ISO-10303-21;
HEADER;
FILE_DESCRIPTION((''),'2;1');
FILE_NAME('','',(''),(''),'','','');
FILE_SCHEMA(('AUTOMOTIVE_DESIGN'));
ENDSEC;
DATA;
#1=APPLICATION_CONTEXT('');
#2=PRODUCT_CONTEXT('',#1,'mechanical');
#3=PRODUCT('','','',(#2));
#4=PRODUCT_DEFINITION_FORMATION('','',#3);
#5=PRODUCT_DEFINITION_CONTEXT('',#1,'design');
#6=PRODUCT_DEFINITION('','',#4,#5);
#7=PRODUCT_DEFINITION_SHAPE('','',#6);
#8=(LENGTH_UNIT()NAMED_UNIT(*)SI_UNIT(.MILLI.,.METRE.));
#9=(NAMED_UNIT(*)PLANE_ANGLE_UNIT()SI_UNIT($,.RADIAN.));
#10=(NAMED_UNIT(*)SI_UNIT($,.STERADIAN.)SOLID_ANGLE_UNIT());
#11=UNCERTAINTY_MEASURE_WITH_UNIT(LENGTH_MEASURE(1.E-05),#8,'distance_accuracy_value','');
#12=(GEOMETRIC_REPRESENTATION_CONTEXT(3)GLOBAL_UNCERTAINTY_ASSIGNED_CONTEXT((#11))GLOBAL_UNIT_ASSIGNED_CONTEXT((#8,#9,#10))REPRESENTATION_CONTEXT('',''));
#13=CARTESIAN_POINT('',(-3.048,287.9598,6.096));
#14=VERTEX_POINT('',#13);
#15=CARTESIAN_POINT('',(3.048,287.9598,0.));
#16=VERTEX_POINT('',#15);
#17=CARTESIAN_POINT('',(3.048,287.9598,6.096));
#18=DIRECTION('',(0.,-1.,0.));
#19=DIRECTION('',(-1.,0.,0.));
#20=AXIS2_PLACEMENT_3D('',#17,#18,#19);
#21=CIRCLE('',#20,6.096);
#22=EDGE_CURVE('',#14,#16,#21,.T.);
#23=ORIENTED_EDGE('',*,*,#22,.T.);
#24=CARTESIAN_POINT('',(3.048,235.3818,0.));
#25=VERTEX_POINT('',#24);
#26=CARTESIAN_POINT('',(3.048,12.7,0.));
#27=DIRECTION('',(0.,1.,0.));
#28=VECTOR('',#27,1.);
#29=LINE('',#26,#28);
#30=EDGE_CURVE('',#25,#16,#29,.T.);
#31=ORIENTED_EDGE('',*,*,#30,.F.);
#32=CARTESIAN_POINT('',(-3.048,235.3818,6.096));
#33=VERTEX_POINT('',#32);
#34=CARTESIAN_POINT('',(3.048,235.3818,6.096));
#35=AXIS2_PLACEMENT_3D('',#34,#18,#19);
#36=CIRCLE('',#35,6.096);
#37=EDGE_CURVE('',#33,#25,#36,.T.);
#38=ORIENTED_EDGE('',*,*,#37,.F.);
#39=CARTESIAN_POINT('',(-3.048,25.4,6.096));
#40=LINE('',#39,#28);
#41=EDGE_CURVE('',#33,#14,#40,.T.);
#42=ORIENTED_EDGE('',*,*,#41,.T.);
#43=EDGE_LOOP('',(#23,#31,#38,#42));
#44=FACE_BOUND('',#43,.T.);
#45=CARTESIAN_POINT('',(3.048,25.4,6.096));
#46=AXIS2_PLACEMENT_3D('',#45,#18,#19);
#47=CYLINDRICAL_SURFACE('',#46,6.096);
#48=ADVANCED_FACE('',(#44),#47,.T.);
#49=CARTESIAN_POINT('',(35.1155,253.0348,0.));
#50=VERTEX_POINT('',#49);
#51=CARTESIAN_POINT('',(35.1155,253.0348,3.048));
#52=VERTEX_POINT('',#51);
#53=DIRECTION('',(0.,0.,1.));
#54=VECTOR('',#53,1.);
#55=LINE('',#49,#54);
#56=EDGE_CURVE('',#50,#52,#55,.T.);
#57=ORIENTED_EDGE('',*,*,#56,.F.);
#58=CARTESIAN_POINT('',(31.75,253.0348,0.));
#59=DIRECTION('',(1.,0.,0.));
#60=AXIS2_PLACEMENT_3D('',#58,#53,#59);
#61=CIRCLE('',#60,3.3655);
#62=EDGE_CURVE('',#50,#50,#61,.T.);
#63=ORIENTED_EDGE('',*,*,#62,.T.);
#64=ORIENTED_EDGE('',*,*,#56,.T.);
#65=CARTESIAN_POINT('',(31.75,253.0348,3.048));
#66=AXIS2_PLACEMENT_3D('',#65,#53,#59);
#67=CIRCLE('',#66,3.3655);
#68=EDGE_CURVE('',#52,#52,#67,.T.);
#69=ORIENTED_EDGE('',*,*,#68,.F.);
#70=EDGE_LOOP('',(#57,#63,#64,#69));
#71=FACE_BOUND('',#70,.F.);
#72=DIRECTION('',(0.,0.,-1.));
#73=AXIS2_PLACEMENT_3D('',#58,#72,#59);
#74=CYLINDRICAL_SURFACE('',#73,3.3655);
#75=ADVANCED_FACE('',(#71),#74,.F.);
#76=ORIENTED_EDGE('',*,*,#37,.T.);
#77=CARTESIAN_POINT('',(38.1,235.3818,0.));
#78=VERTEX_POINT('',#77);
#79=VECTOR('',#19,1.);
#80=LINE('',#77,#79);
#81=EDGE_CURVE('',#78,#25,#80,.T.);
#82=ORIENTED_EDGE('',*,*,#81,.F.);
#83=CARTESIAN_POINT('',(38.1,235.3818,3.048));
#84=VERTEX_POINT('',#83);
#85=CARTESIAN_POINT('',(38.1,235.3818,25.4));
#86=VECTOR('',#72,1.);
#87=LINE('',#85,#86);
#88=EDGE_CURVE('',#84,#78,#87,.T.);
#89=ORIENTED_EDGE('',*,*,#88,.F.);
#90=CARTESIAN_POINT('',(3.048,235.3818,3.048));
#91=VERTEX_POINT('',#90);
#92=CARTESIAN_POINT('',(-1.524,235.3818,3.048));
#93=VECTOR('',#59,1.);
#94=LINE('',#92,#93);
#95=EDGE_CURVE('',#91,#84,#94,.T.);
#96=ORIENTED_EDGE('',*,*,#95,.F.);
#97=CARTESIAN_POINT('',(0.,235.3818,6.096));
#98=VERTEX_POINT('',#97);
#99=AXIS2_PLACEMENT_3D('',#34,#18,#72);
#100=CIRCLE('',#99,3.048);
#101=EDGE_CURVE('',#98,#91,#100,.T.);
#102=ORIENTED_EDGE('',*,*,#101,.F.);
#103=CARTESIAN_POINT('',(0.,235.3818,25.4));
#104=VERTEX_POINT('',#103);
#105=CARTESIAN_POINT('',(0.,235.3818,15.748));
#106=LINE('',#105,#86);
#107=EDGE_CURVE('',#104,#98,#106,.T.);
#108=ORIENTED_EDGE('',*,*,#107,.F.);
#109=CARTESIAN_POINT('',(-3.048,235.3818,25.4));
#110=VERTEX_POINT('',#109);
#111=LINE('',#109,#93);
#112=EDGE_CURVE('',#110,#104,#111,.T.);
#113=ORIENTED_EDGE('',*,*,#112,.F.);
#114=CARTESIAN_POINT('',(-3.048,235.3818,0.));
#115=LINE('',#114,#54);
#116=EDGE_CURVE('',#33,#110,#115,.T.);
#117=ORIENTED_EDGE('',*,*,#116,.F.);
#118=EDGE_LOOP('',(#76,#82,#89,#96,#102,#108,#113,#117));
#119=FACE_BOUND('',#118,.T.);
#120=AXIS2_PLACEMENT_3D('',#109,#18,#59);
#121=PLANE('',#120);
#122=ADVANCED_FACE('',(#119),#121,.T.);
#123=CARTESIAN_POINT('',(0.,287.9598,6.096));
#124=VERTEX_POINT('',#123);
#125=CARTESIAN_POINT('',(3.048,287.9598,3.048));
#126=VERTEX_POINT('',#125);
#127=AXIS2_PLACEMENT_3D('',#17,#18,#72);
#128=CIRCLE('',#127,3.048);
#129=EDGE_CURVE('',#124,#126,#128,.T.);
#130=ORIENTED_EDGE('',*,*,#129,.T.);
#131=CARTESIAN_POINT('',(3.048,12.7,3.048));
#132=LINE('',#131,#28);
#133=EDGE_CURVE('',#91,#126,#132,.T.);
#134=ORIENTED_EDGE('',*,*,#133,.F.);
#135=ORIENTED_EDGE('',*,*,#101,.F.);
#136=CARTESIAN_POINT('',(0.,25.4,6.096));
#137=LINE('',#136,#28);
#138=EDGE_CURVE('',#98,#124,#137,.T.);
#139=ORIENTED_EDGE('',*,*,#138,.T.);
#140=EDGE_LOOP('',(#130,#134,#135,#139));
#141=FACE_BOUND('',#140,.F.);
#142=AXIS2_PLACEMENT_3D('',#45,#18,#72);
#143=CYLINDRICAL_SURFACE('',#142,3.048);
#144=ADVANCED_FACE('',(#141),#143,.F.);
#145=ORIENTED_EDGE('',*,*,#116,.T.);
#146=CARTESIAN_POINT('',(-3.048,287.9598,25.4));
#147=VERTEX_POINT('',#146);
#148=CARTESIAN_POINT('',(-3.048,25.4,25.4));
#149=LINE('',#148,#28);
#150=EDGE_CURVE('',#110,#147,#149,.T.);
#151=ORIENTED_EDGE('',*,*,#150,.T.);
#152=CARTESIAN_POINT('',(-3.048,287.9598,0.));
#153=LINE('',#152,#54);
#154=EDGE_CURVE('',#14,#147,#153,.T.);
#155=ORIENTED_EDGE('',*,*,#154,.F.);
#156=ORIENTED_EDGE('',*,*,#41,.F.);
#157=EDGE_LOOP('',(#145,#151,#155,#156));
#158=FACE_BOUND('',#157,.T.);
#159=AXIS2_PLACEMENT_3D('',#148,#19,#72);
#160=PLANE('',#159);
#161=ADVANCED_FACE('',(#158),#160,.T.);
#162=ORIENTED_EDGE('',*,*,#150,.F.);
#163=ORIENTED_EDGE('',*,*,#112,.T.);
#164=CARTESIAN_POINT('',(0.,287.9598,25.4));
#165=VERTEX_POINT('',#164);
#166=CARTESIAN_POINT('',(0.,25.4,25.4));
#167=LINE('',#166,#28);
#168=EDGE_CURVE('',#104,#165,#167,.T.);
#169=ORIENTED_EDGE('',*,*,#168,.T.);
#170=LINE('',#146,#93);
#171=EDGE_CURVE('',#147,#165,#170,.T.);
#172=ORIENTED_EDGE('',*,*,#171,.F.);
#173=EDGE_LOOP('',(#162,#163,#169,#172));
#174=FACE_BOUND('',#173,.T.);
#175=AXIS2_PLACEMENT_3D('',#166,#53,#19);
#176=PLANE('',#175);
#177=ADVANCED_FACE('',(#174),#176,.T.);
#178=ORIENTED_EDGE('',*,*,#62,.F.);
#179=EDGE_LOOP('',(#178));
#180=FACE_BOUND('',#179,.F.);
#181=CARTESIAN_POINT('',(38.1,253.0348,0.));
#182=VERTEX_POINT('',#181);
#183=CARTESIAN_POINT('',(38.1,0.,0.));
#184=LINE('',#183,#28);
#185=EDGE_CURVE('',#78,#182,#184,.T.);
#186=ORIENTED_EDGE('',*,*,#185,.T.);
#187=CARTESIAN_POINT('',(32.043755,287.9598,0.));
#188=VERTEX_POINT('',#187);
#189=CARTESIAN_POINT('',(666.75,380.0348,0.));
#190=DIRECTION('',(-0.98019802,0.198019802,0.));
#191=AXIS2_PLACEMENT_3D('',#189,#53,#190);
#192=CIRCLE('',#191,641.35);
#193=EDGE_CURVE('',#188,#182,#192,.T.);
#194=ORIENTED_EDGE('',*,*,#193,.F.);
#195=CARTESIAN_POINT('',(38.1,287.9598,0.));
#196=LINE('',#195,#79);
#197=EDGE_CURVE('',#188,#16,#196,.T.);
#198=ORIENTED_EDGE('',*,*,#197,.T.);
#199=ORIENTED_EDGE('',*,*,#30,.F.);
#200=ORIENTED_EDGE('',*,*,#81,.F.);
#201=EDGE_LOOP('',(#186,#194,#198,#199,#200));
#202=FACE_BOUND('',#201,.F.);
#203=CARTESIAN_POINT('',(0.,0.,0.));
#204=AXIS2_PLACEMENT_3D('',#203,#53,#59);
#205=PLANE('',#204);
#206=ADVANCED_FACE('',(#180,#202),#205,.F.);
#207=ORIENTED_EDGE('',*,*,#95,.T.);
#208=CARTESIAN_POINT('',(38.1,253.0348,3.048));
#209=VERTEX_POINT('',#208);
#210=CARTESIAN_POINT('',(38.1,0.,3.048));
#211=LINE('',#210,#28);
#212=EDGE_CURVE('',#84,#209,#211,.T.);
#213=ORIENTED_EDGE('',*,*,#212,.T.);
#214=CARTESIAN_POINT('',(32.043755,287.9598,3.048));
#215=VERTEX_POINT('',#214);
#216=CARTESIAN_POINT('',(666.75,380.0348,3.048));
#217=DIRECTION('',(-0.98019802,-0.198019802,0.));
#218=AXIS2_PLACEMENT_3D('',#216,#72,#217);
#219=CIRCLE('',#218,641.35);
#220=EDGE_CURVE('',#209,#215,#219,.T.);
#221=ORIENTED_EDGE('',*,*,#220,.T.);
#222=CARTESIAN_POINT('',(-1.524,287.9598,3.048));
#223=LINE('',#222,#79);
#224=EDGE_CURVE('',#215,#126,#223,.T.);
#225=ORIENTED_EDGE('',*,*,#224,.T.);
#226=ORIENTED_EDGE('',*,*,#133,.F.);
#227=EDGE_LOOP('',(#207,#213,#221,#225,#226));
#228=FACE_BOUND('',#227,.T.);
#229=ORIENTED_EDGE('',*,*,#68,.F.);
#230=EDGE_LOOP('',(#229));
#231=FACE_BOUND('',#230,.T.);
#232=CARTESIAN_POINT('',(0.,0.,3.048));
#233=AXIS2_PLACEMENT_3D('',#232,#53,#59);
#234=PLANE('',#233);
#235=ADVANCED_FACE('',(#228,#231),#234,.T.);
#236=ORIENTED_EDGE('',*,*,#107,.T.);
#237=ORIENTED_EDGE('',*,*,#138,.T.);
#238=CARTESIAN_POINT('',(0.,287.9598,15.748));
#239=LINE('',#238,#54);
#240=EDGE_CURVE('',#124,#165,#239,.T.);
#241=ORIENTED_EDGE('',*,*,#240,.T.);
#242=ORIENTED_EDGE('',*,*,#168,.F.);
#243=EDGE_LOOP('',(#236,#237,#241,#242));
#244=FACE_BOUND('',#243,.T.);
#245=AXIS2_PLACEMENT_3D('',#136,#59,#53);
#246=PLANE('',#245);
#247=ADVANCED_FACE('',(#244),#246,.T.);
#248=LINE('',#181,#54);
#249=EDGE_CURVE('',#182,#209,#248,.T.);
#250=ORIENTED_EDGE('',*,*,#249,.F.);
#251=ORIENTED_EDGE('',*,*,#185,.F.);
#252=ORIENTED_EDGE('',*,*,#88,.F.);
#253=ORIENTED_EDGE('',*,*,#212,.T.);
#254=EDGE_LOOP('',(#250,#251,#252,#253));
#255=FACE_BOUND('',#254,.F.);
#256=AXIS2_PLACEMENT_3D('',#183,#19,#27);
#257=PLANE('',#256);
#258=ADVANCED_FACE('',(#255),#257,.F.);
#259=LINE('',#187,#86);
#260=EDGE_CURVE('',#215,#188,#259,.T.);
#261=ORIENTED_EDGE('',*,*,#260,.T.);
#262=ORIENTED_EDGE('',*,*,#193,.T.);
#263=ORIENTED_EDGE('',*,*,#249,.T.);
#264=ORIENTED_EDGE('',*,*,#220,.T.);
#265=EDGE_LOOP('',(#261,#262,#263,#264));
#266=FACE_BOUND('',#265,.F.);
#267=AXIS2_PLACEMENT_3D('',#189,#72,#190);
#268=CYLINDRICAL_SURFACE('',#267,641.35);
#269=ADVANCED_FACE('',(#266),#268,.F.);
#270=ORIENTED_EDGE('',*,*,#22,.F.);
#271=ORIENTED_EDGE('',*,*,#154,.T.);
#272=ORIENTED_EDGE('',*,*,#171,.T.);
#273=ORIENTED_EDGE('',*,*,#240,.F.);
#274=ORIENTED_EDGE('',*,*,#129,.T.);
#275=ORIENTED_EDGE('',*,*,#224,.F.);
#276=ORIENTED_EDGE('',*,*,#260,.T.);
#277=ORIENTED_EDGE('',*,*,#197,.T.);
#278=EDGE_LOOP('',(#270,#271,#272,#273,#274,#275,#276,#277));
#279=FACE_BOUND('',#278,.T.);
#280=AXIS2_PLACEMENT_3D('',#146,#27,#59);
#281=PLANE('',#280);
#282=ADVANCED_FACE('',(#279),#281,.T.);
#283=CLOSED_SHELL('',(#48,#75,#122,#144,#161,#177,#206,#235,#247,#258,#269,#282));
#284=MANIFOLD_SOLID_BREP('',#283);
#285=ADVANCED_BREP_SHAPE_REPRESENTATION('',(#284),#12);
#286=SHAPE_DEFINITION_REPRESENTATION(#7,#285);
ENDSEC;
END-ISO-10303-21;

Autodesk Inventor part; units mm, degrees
ref_plane "YZ Plane" through (0, 0, 0) normal (1, 0, 0) x (0, 1, 0)
ref_plane "XZ Plane" through (0, 0, 0) normal (0, 1, 0) x (-1, 0, 0)
ref_plane "XY Plane" through (0, 0, 0) normal (0, 0, 1) x (1, 0, 0)
sketch "Sketch1" plane through (0, 0, 0) normal (0, 0, 1) x (1, 0, 0)
  line L0 (0, 0) -> (38.1, 0)
  line L1 (38.1, 0) -> (38.1, 253.0348)
  arc A0 (38.1, 507.0348) -> (38.1, 253.0348) centre (666.75, 380.0348) ccw
  line L2 (38.1, 507.0348) -> (38.1, 608.6348)
  line L3 (38.1, 608.6348) -> (0, 608.6348)
  line L4 (0, 608.6348) -> (0, 0)
  circle A1 centre (31.75, 151.4348) radius 3.3655
  circle A2 centre (31.75, 34.671) radius 3.3655
  circle A3 centre (12.7, 12.7) radius 3.3655
  circle A4 centre (12.7, 342.9) radius 3.3655
  circle A5 centre (12.7, 595.9348) radius 3.3655
  circle A6 centre (31.75, 12.7) radius 3.3655
  circle A7 centre (31.75, 253.0348) radius 3.3655
  circle A8 centre (31.75, 507.0348) radius 3.3655
  circle A9 centre (31.75, 595.9348) radius 3.3655
  line L5 (0, 557.8348) -> (0, 608.6348)
  line L6 (0, 50.8) -> (0, 0)
  line L7 (12.7, 342.9) -> (0, 304.3174) construction
  line L8 (0, 317.5) -> (0, 368.3)
  line L9 (0, 129.921) -> (12.7, 129.921) construction
  circle A10 centre (12.7, 129.921) radius 3.3655
  circle A11 centre (12.7, 174.371) radius 3.3655
  line L10 (9.3413, 197.482) -> (9.3413, 204.213)
  line L11 (16.0611, 204.488) -> (16.0611, 197.3435)
  arc A12 (16.0611, 204.488) -> (9.3413, 204.213) centre (12.6956, 204.488) ccw
  arc A13 (9.3413, 197.482) -> (16.0611, 197.3435) centre (12.6974, 197.231) ccw
  circle A14 centre (12.7, 217.188) radius 3.3655
  line L12 (35.1155, 268.8247) -> (0, 268.8247)
  dimension "d0" = 38.1
  dimension "d2" = 101.6
  dimension "d4" = 457.2
  dimension "d5" = 101.6
  dimension "d6" = 666.75
  dimension "d7" = 641.35
  dimension "d9" = 116.7638
  dimension "d10" = 6.35
  dimension "d11" = 6.35
  dimension "d13" = 12.7
  dimension "d14" = 12.7
  dimension "d16" = 12.7
  dimension "d17" = 342.9
  dimension "d19" = 12.7
  dimension "d20" = 12.7
  dimension "d22" = 6.35
  dimension "d24" = 6.35
  dimension "d25" = 6.731
  dimension "d26" = 6.35
  dimension "hole" = 6.731
  dimension "d28" = 6.35
  dimension "d45" = 12.7
  dimension "d47" = 12.7
  dimension "d54" = 6.731
  dimension "d55" = 3.3655
  dimension "d56" = 3.3655
  dimension "d58" = 6.731
  dimension "d59" = 12.7
  dimension "d68" = 18.22
  dimension "d69" = 90
  dimension "d70" = 90
  dimension "d71" = 22.0389
  dimension "d72" = 28.7587
  dimension "d73" = 478.7138
  dimension "d74" = 6.35
  dimension "d75" = 6.35
  dimension "d76" = 595.9348
  dimension "d77" = 404.1468
  dimension "d78" = 411.2913
  dimension "d79" = 25.4
  dimension "d80" = 25.4
  dimension "d81" = 434.2638
  dimension "d82" = 50.8
  dimension "d83" = 240.3348
  dimension "d84" = 291.1348
  dimension "d85" = 557.8348
extrude "Plate4" add sketch "Sketch1" along normal blind 3.048
sketch "Sketch5" plane through (0, 0, 3.048) normal (0, 0, 1) x (1, 0, 0)
  line L0 (38.1, 0) -> (38.1, 253.0348) projected
  line L1 (0, 0) -> (38.1, 0)
  line L2 (38.1, 0) -> (38.1, 25.4)
  line L3 (38.1, 25.4) -> (0, 25.4)
  line L4 (0, 25.4) -> (0, 0)
  dimension "d96" = 25.4
extrude "Cut1" cut sketch "Sketch5" against normal blind 3.048
sketch "Sketch7" plane through (0, 25.4, 3.048) normal (-1, 0, 0) x (0, -1, 0)
  line L0 (-583.2348, 0) -> (0, 0)
  line L1 (0, 0) -> (0, 22.352)
  line L2 (0, 22.352) -> (-583.2348, 22.352)
  line L3 (-583.2348, 22.352) -> (-583.2348, 0)
edge flange "Flange3" height 25.4 angle 90 thickness 3.048 bend radius 3.048 thickness toward (-1, 0, 0) relief tear relief width 3.048 relief depth 1.524 edges at (0, 317.0174, 3.048) wall of the first edge with corners at (0, 608.6348, 3.048) (0, 25.4, 3.048) (0, 25.4, 25.4) (0, 608.6348, 25.4)
bend "Bend3"
corner "Corner3"
sketch "Sketch8" plane through (-3.048, 25.4, 25.4) normal (0, -1, 0) x (1, 0, 0)
  line L0 (0, 0) -> (41.148, 0)
  line L1 (41.148, 0) -> (41.148, -25.4)
  line L2 (41.148, -25.4) -> (0, -25.4)
  line L3 (0, -25.4) -> (0, 0)
  point P0 (3.048, -25.4)
sketch "Sketch9" plane through (-3.048, 608.6348, 25.4) normal (0, 1, 0) x (1, 0, 0)
  line L0 (41.148, 25.4) -> (0, 25.4)
  line L1 (0, 25.4) -> (0, 0)
  line L2 (0, 0) -> (41.148, 0)
  line L3 (41.148, 0) -> (41.148, 25.4)
  point P0 (3.048, 25.4)
extrude "Extrusion1" cut sketch "Sketch9" against normal blind 320.675
extrude "Extrusion2" cut sketch "Sketch8" against normal blind 209.9818
equation "\"d97\" = Thickness"
equation "\"d25\" = hole"
equation "\"d109\" = BendReliefWidth"
equation "\"d110\" = BendReliefDepth"
equation "\"d111\" = MinimumRemnant"
equation "\"d112\" = BendRadius"
equation "\"d115\" = BendRadius"
equation "\"d116\" = CornerReliefSize"
equation "\"d117\" = GapSize"
equation "\"d118\" = JacobiRadiusSize"
equation "\"BendRadius\" = Thickness"
equation "\"BendReliefWidth\" = Thickness"
equation "\"BendReliefDepth\" = 0.5 * Thickness"
equation "\"CornerReliefSize\" = 4 * Thickness"
equation "\"MinimumRemnant\" = 2 * Thickness"
equation "\"TransitionRadius\" = BendRadius"
equation "\"JacobiRadiusSize\" = BendRadius"
equation "\"GapSize\" = Thickness"
equation "\"d29\" = BendRadius"
equation "\"d32\" = BendRadius"
equation "\"d38\" = BendRadius"
equation "\"d60\" = BendRadius"
equation "\"Thickness\" = 3.048"
properties part number "Claw - Arm - Top (R) v2"
